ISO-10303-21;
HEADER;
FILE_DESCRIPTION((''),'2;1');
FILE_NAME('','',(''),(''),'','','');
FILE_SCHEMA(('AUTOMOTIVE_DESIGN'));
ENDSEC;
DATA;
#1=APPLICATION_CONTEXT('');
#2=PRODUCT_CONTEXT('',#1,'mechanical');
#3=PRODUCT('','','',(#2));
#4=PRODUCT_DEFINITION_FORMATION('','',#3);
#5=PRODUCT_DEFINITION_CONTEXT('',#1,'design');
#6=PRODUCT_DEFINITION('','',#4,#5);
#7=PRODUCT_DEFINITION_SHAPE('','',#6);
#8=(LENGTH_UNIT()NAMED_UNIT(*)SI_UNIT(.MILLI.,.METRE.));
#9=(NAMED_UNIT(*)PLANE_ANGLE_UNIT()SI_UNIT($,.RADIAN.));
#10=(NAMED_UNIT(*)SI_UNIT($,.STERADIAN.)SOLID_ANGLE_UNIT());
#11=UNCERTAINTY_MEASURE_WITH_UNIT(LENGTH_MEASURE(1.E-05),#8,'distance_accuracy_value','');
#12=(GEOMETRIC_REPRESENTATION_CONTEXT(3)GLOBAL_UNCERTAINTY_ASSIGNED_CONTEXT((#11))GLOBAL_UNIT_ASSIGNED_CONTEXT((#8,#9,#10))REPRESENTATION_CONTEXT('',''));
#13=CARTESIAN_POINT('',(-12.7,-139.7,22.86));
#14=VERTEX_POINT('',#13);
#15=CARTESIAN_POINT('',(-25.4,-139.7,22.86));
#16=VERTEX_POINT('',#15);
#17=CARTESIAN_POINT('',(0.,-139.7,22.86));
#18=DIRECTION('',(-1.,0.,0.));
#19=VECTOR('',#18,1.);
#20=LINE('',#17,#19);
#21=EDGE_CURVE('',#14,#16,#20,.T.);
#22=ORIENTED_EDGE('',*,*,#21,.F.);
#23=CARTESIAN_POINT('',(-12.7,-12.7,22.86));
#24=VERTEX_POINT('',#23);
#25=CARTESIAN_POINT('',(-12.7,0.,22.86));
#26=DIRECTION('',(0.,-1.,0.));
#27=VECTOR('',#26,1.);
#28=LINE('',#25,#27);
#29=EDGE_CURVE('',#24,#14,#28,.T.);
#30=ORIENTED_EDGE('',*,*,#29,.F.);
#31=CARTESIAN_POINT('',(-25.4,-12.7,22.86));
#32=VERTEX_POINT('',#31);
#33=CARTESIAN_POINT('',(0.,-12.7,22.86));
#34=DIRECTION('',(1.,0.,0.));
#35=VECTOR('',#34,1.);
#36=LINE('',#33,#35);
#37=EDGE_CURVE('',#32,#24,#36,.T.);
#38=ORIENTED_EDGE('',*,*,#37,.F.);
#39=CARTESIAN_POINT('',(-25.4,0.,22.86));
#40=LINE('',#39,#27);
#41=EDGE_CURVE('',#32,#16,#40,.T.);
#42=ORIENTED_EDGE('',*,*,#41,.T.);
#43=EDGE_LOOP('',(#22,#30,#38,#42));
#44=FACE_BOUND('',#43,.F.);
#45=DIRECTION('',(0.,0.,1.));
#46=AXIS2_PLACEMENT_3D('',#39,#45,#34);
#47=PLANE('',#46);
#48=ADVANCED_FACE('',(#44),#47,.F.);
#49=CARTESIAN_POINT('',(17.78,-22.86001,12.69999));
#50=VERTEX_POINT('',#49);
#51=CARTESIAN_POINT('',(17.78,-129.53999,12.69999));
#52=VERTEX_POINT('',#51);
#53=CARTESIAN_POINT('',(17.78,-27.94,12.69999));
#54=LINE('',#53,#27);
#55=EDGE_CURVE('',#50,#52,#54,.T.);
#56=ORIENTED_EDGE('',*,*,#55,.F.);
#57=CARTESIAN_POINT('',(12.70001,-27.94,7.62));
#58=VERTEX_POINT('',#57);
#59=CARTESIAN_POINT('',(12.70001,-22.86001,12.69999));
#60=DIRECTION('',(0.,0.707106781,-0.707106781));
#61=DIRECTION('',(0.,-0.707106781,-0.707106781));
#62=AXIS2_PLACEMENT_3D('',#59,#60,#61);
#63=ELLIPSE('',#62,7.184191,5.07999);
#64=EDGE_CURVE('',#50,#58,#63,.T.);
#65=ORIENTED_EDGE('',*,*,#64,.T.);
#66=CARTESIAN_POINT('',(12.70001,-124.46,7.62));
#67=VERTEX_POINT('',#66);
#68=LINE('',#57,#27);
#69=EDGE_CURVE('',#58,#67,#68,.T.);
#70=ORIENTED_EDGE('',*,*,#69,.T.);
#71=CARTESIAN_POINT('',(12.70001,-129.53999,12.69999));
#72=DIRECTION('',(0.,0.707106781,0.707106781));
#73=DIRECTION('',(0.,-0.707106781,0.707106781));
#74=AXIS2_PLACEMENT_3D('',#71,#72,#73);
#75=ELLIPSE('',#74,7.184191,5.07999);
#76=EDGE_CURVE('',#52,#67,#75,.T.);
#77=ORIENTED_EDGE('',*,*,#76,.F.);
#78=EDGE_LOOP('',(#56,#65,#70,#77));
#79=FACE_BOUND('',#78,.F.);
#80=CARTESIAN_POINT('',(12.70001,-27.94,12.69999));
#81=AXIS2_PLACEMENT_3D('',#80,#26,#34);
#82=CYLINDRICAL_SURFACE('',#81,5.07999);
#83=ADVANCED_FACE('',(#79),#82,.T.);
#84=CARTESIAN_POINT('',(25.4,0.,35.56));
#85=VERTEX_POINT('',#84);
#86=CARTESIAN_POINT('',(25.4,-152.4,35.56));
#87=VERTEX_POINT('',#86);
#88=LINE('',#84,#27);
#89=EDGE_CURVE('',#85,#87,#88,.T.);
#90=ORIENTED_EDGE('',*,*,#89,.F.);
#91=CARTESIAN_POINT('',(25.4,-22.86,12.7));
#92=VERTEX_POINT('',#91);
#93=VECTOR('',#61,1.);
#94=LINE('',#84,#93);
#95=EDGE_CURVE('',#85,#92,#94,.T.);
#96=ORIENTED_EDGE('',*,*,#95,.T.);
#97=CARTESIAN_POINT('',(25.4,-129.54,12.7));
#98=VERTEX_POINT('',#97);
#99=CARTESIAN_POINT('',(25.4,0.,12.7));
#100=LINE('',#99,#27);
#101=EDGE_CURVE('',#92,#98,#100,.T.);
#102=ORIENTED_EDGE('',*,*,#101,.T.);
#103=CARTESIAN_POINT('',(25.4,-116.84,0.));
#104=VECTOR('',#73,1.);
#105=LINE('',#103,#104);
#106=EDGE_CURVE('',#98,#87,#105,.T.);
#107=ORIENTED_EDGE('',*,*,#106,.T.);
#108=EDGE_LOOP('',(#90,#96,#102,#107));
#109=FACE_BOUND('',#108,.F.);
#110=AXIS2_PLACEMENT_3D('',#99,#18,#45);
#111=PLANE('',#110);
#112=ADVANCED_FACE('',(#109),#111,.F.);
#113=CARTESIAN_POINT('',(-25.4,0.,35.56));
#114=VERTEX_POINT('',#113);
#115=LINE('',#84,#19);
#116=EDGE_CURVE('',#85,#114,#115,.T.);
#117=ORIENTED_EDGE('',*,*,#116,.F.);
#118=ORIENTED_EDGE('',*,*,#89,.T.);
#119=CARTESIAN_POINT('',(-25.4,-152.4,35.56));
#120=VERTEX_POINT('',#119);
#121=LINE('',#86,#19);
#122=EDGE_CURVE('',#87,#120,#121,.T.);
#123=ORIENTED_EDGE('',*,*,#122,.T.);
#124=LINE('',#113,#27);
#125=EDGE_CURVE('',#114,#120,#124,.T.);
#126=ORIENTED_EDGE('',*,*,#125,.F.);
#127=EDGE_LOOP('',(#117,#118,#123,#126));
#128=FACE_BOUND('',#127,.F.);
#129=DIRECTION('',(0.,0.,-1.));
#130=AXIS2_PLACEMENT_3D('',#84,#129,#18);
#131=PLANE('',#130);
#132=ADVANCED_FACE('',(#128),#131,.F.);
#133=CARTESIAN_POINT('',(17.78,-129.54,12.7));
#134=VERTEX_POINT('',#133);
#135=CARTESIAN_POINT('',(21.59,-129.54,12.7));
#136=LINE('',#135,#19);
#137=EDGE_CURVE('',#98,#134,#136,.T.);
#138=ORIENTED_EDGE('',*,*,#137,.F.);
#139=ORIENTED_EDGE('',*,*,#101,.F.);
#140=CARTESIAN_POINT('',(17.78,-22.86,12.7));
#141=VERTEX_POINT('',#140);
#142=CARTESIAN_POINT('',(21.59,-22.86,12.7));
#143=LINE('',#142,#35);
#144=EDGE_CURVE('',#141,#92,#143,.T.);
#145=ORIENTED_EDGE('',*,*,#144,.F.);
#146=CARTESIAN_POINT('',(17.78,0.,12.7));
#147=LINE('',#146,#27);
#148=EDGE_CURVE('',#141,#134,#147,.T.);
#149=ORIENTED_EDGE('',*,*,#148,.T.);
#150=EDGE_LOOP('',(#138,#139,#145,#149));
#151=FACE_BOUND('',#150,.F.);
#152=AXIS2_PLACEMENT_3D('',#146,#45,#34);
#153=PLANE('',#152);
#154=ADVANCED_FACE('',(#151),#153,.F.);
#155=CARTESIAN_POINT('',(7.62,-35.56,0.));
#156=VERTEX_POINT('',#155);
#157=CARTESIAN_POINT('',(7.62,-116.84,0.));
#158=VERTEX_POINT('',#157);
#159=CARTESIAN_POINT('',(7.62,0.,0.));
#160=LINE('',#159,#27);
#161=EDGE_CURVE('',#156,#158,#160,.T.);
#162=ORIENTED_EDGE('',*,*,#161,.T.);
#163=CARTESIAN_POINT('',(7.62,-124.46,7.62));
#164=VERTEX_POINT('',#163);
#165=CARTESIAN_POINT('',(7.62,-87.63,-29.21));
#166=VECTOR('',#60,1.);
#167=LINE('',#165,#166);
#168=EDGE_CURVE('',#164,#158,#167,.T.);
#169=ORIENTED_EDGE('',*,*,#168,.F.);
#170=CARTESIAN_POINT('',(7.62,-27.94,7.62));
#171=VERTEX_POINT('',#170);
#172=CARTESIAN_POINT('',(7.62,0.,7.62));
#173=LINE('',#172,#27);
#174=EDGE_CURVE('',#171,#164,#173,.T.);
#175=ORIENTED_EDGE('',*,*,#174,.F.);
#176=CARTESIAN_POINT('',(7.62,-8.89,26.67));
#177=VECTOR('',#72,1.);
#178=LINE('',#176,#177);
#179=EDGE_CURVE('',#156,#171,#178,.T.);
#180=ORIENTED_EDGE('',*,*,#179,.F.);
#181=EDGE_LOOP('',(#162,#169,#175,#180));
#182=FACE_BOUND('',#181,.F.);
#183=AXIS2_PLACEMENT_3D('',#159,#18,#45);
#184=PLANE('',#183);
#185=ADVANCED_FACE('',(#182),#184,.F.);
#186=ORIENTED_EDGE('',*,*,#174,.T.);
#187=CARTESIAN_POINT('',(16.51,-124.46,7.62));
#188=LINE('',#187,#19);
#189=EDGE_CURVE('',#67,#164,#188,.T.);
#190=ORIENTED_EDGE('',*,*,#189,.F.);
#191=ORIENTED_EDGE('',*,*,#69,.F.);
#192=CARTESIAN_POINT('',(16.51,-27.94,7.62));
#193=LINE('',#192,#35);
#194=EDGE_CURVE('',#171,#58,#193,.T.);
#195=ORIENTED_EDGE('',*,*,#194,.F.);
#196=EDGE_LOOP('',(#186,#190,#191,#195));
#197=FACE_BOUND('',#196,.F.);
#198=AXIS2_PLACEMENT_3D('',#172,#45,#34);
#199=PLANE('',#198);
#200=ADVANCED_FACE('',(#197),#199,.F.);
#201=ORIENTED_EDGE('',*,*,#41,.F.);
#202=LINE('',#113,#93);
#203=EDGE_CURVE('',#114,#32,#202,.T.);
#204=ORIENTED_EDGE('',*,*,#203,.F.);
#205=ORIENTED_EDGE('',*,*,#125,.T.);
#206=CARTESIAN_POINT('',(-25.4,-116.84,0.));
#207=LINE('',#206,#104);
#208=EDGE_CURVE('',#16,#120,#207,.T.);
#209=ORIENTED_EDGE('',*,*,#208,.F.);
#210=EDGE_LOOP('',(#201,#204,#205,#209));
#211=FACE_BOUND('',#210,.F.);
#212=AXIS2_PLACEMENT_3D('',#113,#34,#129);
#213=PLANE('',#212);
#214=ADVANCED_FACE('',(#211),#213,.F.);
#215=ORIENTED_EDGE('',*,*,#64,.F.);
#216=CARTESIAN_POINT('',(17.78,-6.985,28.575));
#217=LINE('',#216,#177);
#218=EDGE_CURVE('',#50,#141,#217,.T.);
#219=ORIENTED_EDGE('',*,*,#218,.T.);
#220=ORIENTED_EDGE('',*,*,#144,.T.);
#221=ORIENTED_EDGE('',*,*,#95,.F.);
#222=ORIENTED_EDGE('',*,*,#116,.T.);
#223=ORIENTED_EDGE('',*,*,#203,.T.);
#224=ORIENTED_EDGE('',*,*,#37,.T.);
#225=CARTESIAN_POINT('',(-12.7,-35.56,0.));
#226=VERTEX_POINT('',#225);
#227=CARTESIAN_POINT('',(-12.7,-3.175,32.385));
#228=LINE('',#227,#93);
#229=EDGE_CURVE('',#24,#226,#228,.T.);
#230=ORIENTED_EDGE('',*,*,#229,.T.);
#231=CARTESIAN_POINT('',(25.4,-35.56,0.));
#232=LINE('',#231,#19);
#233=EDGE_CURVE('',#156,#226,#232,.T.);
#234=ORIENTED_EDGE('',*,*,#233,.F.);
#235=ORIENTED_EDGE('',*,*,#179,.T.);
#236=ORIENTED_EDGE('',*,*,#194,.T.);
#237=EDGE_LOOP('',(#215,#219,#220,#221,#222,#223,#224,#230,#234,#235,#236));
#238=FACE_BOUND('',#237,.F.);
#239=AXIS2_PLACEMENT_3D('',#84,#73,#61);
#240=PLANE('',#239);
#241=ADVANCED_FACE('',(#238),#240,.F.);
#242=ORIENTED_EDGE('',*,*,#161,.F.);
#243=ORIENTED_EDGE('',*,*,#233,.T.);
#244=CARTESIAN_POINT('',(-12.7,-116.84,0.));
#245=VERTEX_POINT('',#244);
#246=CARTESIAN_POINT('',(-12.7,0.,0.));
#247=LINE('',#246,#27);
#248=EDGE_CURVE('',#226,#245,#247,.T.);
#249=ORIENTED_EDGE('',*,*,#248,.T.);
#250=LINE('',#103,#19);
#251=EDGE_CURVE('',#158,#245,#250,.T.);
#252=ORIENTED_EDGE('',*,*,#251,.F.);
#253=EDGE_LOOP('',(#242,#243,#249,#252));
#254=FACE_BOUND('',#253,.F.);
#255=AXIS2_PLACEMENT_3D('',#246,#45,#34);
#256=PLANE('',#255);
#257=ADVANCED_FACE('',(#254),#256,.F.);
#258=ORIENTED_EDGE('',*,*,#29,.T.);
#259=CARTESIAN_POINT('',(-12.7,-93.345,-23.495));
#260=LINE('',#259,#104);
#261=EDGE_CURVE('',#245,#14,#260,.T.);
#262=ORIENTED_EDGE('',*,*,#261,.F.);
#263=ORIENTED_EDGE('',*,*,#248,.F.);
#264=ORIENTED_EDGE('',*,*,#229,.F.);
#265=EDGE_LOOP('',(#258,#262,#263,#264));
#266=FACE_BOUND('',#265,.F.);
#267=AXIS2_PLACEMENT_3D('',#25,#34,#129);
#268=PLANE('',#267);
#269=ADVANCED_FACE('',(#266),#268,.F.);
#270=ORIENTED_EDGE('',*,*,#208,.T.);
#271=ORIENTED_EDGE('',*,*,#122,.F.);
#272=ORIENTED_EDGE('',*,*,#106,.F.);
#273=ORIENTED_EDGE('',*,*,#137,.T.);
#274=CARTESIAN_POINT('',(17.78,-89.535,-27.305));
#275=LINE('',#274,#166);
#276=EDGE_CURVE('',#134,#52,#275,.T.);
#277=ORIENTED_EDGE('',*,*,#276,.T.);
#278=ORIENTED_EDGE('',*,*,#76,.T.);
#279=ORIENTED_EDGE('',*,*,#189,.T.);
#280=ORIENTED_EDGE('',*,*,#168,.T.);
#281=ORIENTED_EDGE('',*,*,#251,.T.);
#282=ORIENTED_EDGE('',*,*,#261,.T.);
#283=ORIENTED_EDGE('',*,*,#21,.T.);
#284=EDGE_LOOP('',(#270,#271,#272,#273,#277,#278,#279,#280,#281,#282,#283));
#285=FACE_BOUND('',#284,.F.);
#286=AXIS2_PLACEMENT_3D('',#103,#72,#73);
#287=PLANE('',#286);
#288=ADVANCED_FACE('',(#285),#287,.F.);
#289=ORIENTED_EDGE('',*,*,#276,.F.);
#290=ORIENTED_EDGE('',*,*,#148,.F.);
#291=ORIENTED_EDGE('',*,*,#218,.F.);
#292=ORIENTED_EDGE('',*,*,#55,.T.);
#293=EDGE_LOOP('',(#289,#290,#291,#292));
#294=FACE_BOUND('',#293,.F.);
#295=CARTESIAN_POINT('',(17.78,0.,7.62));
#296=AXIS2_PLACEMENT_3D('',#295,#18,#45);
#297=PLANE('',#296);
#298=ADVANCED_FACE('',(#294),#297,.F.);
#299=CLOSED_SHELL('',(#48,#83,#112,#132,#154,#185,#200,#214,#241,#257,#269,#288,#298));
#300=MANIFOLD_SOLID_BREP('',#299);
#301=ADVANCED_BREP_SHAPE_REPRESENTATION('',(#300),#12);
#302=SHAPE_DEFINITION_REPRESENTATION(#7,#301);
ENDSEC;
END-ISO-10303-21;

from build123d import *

# Parameters (mm, degrees)
F1_DEPTH = 152.4
F3_DEPTH = 50.8
F5_DEPTH = 50.8
F6_R     = 5.07999


# Not quite as in the source:
# - a fillet or chamfer is up to 0.001 mm smaller than in the source, because OpenCascade refuses the exact size


with BuildPart() as f1:
    # F0 (on Front) → F1 (new body)
    with BuildSketch(Plane.XZ):
        Polygon((25.4, 35.56), (-25.4, 35.56), (-25.4, 22.86), (-12.7, 22.86), (-12.7, 0), (0, 0), (7.62, 0), (7.62, 7.62), (17.78, 7.62), (17.78, 12.7), (25.4, 12.7), align=None)
    extrude(amount=F1_DEPTH)

    # F2 (on face) → F3 (cut)
    with BuildSketch(Plane.YZ.offset(25.4)):
        Polygon((-116.84, 0), (-152.4, 35.56), (-152.4, 0), align=None)
    extrude(amount=-F3_DEPTH, mode=Mode.SUBTRACT)

    # F4 (on face) → F5 (cut)
    with BuildSketch(Plane.YZ.offset(25.4)):
        Polygon((0, 0), (0, 35.56), (-35.56, 0), align=None)
    extrude(amount=-F5_DEPTH, mode=Mode.SUBTRACT)

    # F6 (radius 5.08 in the source; OpenCascade refuses exactly that, so slightly less here)
    f6_edges = [f1.edges().sort_by_distance(p)[0] for p in [
        (17.78, -76.2, 7.62),
    ]]
    fillet(f6_edges, radius=F6_R)


solid = f1.part
